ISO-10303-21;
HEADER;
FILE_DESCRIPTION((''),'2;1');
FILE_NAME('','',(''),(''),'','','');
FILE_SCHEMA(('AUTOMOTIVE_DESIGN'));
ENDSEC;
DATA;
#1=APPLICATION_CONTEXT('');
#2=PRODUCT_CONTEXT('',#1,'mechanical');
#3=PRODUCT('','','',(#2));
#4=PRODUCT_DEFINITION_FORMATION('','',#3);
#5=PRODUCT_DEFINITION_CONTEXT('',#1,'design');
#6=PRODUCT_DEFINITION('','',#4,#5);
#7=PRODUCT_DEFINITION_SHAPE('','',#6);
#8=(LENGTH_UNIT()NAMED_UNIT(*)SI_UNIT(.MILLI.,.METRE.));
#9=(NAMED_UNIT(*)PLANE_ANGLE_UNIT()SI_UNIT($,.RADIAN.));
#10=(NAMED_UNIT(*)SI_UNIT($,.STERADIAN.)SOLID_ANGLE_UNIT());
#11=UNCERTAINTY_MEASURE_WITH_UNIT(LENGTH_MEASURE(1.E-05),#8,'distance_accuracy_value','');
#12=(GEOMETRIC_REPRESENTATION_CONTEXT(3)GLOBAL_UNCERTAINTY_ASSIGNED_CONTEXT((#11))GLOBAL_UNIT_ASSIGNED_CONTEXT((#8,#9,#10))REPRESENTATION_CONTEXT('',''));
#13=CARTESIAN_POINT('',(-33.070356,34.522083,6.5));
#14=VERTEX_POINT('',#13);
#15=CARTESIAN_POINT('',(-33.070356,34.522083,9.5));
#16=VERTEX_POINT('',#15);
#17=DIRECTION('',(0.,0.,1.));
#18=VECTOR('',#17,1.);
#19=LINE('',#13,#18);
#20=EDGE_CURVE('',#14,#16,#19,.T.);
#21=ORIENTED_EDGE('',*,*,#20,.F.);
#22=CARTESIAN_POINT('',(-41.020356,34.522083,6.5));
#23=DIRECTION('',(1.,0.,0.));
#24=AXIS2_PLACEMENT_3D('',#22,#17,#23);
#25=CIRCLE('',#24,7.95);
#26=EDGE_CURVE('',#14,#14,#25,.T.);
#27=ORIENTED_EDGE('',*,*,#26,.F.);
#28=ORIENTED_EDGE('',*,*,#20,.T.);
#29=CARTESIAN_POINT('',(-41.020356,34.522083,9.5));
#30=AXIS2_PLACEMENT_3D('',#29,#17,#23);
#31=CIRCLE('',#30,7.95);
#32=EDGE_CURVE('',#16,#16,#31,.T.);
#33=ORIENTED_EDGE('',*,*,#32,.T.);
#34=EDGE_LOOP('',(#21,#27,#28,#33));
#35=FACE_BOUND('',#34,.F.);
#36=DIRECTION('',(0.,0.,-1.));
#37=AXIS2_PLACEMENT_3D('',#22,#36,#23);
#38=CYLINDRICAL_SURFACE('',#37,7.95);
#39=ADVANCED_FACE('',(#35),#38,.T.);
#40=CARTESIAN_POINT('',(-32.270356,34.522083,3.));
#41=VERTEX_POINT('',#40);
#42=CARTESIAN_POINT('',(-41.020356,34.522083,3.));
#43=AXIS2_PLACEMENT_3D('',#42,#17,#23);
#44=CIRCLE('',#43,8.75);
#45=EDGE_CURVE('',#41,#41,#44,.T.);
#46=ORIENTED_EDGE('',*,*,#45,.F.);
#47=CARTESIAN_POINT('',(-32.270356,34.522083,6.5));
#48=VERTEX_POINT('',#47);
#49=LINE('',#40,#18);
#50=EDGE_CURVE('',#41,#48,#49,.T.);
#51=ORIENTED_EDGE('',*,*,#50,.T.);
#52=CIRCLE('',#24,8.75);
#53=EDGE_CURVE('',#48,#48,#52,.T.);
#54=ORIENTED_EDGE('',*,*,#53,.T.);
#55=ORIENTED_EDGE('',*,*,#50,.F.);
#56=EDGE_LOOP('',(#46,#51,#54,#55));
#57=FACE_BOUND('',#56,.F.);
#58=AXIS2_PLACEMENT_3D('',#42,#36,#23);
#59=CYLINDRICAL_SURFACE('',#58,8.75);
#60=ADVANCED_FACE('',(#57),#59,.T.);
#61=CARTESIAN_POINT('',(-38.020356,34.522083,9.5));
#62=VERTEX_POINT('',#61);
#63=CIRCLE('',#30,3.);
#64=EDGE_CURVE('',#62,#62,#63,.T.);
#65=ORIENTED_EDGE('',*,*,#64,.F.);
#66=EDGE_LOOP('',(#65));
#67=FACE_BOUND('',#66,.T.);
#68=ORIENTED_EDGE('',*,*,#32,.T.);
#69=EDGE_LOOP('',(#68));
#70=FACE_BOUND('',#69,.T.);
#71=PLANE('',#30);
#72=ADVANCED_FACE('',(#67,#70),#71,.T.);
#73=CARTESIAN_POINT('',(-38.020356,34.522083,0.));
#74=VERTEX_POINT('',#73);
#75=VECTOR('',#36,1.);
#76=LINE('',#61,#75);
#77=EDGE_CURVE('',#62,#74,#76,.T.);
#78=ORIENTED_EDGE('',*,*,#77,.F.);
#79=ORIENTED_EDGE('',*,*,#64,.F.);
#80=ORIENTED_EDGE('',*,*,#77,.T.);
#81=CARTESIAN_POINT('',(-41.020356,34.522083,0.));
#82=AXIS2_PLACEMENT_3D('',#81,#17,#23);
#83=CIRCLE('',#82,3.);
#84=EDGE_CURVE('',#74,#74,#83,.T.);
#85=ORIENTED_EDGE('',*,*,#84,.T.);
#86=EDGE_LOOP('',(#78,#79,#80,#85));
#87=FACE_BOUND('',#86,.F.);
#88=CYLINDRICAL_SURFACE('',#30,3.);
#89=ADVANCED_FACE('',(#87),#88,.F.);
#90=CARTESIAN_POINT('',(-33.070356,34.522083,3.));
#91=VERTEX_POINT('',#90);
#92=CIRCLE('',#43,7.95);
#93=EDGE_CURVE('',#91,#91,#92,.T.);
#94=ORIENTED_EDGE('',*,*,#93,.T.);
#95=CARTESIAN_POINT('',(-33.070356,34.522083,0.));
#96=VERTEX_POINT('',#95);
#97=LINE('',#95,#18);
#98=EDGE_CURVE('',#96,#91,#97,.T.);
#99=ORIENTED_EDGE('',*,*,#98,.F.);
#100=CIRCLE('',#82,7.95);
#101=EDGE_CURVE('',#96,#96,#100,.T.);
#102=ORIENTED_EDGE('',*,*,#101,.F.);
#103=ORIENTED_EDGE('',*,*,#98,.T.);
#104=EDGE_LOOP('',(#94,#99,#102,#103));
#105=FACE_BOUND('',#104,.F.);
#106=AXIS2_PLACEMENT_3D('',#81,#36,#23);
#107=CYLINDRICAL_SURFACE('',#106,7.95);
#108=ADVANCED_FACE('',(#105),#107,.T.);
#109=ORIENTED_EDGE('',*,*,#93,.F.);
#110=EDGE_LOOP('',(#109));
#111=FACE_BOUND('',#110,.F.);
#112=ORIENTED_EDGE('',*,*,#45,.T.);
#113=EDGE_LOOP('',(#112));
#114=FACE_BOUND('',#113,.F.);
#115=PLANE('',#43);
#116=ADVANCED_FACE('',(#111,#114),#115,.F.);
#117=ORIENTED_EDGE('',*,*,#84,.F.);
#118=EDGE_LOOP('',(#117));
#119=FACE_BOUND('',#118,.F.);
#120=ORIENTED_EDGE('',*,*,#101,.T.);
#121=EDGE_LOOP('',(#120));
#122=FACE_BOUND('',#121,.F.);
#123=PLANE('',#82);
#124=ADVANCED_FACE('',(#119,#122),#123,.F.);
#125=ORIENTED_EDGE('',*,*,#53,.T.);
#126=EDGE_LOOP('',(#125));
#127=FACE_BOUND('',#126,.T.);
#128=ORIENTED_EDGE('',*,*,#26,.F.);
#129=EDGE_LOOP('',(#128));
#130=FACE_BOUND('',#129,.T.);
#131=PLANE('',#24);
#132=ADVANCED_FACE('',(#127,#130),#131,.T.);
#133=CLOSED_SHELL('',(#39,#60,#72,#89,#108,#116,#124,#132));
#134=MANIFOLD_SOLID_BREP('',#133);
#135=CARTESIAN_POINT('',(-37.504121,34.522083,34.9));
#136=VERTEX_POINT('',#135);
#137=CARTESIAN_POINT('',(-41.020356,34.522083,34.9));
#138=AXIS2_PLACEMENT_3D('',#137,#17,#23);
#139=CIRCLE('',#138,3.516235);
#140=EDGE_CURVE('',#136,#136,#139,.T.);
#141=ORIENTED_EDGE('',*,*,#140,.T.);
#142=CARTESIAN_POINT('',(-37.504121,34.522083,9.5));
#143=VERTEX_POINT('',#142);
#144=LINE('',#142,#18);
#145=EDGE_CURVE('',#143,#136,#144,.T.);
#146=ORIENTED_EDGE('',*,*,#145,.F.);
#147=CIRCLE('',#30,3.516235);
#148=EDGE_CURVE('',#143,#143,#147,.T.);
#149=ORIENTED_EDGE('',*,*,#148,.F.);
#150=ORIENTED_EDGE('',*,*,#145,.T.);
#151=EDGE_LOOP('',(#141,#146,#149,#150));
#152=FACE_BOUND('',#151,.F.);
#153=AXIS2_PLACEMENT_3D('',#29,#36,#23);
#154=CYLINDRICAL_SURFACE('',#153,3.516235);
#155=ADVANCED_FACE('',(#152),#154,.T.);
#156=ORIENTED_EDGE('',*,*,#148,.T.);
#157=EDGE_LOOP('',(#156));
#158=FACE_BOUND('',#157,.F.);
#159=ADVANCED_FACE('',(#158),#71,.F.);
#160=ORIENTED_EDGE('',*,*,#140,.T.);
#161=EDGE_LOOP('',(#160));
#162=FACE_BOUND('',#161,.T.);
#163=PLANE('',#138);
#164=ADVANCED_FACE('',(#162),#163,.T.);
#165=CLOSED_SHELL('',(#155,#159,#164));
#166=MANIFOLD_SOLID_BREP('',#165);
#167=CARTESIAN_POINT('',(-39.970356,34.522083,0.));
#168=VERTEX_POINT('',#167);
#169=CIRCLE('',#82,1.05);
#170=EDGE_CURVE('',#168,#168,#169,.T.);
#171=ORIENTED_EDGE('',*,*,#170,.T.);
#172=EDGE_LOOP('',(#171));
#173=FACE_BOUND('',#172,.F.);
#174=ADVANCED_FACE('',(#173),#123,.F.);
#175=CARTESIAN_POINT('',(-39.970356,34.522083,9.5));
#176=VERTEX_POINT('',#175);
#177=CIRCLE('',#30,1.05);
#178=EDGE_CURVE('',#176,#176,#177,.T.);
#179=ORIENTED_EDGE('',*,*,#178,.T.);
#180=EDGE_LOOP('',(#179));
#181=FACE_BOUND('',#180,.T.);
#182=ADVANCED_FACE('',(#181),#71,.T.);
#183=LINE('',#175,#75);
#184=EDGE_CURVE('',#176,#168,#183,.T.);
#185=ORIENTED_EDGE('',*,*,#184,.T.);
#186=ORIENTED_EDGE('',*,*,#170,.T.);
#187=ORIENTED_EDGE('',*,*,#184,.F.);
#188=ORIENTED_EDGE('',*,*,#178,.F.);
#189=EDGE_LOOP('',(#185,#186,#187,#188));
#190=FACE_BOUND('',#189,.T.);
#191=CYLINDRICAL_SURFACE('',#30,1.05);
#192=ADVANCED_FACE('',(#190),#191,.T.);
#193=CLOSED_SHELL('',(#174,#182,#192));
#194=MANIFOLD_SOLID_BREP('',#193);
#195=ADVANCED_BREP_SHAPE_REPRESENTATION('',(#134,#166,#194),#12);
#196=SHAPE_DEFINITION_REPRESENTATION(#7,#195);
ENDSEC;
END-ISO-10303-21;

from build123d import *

# Parameters (mm, degrees)
F0_R      = 7.95
F1_DEPTH  = 3
F2_R      = 8.75
F3_DEPTH  = 3.5
F4_R      = 7.95
F5_DEPTH  = 3
F6_R      = 3
F6_R_2    = 1.05
F7_DEPTH  = 10
F10_R     = 3.51623502
F11_DEPTH = 25.4


# Not quite as in the source:
# - a feature of the source that left no trace in its solid (it failed there, or was rolled back) is left out


with BuildPart() as f1:
    # F0 (on Top) → F1 (new body)
    with BuildSketch(Plane.XY):
        with Locations((-41.0203561187, 34.5220826566)):
            Circle(F0_R)
    extrude(amount=F1_DEPTH)

    # F2 (on face) → F3 (join)
    with BuildSketch(Plane.XY.offset(3)):
        with Locations((-41.0203561187, 34.5220826566)):
            Circle(F2_R)
    extrude(amount=F3_DEPTH)

    # F4 (on face) → F5 (join)
    with BuildSketch(Plane.XY.offset(6.5)):
        with Locations((-41.0203561187, 34.5220826566)):
            Circle(F4_R)
    extrude(amount=F5_DEPTH)

    # F6 (on face) → F7 (cut)
    with BuildSketch(Plane.XY.offset(9.5)):
        with Locations((-41.0203561187, 34.5220826566)):
            Circle(F6_R)
        with Locations((-41.0203561187, 34.5220826566)):
            Circle(F6_R_2, mode=Mode.SUBTRACT)
    extrude(amount=-F7_DEPTH, mode=Mode.SUBTRACT)


with BuildPart() as f11:
    # F10 (on face) → F11 (new body)
    with BuildSketch(Plane.XY.offset(9.5)):
        with Locations((-41.0203561187, 34.5220826566)):
            Circle(F10_R)
    extrude(amount=F11_DEPTH)


solid = Compound([f1.part, f11.part])
